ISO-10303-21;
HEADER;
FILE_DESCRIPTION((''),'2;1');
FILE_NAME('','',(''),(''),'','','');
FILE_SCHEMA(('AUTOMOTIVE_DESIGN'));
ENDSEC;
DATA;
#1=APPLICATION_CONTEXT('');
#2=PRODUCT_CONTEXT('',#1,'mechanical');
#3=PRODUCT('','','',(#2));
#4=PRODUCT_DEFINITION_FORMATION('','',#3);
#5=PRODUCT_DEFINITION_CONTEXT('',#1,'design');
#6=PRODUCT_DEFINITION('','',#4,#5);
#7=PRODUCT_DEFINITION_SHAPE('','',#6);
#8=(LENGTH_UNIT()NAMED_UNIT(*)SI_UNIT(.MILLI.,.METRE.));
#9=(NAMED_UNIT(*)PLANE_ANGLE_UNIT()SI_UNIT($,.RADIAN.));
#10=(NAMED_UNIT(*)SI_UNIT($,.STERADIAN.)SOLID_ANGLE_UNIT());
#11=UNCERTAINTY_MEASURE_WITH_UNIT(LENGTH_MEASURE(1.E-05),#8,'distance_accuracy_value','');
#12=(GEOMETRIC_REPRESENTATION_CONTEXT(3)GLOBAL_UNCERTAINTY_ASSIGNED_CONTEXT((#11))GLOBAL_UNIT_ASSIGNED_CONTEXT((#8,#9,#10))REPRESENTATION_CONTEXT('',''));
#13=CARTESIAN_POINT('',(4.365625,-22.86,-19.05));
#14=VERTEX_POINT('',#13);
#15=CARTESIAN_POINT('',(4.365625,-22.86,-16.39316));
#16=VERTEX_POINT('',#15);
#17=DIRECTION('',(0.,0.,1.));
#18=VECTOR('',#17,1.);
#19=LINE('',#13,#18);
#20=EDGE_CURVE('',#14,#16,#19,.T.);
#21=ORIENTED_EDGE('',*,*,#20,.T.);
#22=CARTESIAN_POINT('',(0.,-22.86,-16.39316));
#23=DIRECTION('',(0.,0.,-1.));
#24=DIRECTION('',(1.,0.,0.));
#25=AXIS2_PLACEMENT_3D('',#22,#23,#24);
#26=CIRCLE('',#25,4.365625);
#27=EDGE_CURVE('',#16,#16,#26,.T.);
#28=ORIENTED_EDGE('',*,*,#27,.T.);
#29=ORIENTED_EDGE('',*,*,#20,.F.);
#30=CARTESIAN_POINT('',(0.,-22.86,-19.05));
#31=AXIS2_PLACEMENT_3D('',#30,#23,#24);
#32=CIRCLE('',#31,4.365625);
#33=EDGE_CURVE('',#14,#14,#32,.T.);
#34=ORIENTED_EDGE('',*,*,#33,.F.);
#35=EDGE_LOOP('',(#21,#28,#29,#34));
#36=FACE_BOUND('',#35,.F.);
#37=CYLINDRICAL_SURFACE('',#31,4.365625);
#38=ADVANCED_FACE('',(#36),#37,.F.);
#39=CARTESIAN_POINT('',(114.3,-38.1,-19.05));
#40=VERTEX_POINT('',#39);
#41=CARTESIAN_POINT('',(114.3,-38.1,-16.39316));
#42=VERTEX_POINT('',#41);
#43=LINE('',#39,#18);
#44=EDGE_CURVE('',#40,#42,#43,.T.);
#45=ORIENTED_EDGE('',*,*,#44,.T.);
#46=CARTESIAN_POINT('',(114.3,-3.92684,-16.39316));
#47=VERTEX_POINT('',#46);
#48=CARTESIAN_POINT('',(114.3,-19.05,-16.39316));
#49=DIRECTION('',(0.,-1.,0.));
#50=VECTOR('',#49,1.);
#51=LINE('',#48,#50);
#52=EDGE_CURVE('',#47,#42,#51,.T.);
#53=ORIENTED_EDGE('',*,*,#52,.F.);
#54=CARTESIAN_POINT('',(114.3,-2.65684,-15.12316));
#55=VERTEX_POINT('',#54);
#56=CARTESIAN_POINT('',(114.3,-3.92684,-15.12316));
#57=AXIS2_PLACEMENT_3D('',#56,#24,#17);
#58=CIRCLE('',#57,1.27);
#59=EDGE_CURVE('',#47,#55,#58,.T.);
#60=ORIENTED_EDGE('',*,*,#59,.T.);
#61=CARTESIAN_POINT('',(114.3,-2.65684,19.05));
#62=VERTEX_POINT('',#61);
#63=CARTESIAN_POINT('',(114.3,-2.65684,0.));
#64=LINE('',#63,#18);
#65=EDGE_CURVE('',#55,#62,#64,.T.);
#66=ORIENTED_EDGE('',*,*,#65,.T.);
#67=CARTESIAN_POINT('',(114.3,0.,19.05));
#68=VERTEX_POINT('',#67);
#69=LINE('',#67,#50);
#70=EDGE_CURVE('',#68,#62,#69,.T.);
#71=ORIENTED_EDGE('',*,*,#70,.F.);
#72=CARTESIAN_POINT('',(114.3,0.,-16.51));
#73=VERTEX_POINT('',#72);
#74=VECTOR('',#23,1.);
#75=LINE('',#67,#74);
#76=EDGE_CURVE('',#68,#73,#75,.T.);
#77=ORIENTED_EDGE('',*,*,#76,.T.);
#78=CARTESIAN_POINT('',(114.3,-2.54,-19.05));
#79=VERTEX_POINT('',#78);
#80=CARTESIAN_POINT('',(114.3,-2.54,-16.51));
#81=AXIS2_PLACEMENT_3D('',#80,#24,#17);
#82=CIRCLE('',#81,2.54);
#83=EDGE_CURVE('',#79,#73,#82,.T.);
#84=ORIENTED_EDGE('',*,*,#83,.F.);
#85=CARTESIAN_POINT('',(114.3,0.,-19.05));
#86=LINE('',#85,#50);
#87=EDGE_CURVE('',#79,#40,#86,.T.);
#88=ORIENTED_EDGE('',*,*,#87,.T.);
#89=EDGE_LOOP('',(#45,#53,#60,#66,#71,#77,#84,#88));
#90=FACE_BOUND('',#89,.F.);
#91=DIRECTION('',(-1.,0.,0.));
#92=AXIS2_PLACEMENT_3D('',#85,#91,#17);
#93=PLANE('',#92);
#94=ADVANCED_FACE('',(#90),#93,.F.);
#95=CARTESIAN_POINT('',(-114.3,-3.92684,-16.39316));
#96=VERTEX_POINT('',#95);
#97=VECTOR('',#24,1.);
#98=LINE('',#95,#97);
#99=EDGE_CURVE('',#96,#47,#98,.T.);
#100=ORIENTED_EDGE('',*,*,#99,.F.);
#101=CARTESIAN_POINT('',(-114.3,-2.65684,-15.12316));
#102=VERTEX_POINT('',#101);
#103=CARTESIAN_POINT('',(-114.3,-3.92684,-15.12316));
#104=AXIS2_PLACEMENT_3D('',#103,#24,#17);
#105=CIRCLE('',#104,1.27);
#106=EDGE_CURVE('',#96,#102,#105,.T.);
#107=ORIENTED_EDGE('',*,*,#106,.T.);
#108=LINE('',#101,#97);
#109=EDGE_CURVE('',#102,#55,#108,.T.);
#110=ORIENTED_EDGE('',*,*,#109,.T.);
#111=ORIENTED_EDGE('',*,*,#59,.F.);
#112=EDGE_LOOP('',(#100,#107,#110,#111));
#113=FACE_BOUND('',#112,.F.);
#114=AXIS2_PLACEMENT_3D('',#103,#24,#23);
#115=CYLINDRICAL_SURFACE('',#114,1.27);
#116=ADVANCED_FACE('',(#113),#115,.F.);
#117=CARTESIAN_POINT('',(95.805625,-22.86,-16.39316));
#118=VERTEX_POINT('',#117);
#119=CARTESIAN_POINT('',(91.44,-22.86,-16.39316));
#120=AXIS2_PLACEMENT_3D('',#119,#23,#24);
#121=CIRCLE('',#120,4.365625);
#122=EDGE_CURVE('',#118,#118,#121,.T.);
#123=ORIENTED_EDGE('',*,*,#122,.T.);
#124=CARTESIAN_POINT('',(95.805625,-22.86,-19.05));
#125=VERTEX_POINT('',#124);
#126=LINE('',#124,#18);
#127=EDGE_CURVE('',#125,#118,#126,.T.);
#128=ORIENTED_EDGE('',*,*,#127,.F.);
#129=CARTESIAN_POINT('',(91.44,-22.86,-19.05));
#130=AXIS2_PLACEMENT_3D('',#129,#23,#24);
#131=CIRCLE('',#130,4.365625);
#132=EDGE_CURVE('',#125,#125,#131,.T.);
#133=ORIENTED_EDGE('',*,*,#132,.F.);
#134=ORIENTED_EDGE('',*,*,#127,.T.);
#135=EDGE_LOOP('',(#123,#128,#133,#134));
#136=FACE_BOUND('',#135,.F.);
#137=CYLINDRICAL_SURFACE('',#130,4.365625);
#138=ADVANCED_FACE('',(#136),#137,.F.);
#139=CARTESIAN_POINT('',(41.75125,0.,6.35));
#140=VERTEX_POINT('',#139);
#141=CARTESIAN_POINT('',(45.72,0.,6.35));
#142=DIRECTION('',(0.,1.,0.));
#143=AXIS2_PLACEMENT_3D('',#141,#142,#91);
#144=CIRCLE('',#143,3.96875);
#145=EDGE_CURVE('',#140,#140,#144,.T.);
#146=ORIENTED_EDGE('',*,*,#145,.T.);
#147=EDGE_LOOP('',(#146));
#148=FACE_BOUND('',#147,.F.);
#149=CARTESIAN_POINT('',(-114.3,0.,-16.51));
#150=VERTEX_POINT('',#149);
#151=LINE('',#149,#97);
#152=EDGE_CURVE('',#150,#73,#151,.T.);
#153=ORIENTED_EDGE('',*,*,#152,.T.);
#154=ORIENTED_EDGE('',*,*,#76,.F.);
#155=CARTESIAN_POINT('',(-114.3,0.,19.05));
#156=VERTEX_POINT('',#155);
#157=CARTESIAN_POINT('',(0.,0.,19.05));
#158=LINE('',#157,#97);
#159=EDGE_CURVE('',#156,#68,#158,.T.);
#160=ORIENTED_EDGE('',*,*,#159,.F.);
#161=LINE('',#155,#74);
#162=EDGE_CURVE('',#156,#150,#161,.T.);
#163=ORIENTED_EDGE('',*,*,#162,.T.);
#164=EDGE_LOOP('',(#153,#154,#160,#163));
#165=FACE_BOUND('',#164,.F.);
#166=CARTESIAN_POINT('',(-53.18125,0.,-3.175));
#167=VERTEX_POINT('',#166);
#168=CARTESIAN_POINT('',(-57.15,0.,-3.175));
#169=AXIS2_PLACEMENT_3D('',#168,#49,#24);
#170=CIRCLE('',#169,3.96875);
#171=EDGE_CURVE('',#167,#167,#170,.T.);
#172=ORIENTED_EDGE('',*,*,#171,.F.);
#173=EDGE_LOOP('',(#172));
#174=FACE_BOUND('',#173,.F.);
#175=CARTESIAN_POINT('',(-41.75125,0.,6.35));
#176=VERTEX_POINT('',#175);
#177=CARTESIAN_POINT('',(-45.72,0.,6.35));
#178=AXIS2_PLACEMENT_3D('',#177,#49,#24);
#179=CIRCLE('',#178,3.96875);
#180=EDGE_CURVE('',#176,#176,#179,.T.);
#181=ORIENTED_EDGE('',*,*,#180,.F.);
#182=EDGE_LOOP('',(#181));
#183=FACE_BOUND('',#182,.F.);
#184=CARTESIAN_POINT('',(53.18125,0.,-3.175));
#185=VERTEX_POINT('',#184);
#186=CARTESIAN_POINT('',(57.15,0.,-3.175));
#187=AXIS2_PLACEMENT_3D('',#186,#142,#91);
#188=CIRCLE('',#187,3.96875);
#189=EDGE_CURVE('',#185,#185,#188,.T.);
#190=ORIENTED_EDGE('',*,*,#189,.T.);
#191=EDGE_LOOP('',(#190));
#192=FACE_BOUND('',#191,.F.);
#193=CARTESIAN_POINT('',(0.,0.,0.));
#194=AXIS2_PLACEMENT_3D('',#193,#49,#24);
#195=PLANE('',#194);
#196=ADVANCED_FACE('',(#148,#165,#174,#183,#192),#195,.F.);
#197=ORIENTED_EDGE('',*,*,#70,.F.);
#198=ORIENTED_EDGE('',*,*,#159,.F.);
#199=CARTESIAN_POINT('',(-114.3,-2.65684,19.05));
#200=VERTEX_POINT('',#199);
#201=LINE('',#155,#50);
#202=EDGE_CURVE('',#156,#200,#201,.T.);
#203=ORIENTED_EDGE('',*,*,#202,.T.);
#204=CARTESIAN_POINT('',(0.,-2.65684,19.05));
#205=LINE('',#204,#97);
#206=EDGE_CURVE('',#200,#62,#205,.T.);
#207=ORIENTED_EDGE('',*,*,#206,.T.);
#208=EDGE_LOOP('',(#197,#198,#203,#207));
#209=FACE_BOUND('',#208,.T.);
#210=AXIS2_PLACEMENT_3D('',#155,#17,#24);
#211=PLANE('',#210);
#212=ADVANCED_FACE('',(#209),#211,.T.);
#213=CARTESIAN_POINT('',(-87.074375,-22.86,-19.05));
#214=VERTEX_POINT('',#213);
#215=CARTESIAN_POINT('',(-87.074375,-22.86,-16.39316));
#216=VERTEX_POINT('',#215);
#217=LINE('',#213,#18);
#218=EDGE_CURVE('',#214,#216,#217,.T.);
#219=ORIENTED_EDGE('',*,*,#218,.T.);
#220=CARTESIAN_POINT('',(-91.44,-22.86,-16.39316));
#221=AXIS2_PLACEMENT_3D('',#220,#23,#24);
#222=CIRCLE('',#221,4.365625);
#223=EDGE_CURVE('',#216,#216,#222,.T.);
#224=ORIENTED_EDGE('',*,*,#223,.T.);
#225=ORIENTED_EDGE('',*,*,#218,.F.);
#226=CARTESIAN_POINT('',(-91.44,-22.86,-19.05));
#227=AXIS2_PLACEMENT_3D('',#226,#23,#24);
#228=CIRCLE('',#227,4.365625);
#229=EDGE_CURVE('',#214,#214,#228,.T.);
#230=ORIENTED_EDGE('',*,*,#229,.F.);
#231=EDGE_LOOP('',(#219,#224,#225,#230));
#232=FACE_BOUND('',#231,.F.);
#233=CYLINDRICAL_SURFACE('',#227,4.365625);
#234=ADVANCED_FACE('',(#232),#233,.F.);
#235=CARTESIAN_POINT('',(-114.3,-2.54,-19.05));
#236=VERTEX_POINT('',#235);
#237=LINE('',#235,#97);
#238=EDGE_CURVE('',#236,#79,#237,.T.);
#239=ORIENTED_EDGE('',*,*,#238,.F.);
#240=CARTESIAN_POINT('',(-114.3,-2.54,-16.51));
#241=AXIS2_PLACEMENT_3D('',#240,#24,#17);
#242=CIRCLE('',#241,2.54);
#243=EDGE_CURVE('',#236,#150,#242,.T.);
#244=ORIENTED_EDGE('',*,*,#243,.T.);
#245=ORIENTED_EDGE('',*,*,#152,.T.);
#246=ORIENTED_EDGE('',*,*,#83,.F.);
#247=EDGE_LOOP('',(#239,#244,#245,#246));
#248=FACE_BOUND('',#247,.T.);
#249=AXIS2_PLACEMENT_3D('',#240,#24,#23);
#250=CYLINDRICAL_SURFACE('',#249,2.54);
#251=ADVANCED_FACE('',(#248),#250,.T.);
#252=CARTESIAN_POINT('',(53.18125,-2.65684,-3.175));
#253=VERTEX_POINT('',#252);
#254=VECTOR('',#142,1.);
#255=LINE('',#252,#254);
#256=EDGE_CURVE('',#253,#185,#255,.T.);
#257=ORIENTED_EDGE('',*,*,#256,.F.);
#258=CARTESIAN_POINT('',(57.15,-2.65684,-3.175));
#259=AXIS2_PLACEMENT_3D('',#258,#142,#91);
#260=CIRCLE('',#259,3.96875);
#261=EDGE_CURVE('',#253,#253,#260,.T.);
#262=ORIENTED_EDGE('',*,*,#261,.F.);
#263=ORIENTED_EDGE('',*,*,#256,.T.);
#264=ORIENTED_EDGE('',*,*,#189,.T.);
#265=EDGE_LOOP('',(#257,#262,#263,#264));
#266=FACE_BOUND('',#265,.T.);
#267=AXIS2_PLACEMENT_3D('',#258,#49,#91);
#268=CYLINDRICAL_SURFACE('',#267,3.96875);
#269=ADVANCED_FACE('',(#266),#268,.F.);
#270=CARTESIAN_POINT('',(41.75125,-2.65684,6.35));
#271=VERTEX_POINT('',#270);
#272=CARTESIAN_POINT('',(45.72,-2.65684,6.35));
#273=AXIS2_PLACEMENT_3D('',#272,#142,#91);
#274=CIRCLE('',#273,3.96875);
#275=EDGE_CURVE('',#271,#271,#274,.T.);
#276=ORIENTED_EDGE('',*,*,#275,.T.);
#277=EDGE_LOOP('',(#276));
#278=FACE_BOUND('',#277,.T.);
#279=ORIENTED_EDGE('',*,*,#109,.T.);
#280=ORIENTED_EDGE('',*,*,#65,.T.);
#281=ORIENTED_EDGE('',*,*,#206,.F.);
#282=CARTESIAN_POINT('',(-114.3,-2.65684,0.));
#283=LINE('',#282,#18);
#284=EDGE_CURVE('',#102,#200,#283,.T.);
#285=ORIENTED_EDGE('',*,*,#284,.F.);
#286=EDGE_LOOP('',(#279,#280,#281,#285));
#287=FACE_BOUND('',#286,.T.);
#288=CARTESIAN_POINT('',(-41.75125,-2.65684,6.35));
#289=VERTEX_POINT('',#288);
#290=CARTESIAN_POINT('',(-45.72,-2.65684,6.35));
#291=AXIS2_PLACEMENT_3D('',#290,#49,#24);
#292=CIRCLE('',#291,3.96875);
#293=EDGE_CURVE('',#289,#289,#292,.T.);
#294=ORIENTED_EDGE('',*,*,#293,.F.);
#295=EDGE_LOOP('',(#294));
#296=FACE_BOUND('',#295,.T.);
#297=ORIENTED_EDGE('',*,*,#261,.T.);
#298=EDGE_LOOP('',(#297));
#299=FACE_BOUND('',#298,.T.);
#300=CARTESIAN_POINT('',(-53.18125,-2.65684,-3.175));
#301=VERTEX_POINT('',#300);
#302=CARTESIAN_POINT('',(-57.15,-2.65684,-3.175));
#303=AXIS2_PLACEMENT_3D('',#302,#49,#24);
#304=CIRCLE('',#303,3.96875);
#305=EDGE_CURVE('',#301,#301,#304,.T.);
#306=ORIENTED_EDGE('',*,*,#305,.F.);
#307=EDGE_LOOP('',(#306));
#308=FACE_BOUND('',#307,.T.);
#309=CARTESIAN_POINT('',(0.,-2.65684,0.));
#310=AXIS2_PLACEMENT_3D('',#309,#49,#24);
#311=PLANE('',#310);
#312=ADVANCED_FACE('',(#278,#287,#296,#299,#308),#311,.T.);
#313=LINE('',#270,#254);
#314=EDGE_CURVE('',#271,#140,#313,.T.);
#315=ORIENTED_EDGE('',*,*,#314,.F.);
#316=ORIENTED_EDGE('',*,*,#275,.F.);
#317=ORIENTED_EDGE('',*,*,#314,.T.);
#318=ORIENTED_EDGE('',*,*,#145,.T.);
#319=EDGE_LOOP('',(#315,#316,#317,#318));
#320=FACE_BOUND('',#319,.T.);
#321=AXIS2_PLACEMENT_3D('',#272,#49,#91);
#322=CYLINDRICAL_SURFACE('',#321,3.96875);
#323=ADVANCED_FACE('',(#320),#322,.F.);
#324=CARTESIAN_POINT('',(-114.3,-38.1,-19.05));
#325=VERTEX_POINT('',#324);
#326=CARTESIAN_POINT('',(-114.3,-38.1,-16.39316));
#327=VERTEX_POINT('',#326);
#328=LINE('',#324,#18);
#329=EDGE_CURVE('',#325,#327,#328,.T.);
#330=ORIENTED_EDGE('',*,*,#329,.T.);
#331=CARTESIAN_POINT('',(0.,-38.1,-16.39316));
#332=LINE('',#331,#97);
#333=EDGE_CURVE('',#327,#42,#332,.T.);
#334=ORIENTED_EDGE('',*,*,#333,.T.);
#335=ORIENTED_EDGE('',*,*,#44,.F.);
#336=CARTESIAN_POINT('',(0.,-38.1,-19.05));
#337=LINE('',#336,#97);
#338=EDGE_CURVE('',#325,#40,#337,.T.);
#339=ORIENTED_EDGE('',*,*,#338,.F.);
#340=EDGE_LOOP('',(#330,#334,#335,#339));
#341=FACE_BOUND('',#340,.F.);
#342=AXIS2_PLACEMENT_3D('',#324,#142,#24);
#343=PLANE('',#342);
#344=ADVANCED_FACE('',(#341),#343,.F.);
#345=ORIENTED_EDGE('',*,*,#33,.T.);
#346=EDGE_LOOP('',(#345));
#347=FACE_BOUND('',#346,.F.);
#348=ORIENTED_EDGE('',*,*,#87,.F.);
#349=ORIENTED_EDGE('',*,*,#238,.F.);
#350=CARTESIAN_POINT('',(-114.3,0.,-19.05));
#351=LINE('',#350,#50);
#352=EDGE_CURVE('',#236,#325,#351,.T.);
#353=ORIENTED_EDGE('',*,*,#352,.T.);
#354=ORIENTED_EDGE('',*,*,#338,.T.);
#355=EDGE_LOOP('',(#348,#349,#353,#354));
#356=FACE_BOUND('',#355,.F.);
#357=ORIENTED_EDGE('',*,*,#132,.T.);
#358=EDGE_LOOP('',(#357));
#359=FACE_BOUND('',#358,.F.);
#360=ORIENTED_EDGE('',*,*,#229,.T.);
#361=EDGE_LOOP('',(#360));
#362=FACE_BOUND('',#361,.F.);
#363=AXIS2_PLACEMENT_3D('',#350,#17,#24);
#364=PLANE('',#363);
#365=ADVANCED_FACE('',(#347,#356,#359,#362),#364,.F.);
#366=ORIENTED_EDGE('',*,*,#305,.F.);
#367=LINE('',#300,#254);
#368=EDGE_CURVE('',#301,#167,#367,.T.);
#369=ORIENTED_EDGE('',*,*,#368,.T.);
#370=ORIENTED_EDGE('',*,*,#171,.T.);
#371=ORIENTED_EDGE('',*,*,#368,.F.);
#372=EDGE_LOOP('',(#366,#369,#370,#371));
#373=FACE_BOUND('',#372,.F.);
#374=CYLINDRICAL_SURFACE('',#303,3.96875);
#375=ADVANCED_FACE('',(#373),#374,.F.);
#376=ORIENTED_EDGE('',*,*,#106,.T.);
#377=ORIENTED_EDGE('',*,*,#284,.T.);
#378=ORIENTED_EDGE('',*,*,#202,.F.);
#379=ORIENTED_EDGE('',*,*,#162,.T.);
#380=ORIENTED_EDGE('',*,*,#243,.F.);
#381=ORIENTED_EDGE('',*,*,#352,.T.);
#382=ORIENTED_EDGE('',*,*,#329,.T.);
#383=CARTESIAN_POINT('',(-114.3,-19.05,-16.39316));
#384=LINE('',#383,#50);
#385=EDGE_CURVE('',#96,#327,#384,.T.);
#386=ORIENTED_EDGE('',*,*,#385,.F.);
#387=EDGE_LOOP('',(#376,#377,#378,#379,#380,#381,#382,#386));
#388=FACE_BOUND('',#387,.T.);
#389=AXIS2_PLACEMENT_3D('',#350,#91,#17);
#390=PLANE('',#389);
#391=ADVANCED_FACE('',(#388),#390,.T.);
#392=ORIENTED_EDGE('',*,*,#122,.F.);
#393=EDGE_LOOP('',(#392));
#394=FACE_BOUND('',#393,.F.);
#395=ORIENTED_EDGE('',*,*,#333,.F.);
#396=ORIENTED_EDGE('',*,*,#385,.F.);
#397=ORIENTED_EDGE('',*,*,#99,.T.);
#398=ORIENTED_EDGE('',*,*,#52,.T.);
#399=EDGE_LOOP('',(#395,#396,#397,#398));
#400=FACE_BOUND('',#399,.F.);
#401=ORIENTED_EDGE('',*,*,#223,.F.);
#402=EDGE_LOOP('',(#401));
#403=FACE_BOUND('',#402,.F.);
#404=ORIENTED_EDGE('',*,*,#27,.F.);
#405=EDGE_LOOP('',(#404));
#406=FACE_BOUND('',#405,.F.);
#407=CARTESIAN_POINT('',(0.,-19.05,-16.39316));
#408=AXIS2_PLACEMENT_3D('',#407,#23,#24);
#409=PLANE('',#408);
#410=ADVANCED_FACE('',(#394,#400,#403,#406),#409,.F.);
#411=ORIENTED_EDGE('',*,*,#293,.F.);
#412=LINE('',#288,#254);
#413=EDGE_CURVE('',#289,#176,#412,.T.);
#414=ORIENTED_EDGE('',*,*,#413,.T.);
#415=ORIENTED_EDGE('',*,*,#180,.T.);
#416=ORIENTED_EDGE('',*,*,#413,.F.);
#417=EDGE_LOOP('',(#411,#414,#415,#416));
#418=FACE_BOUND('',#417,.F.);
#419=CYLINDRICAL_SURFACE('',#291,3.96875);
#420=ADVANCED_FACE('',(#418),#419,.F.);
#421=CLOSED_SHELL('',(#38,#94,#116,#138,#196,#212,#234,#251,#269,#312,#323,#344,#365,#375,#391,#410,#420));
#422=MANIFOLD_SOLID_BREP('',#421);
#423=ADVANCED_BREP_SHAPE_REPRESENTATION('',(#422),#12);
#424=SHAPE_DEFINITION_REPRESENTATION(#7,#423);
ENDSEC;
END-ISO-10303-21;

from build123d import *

# Parameters (mm, degrees)
F0_W     = 228.6
F0_H     = 38.1
F1_DEPTH = 2.65684
F2_W     = 228.6
F2_H     = 38.1
F3_DEPTH = 2.65684
F4_R     = 3.96875
F5_DEPTH = 2.65684
F6_R     = 4.365625
F7_DEPTH = 2.65684
F8_R     = 2.54
F9_R     = 1.27


# Not quite as in the source:
# - a pattern or mirror of a feature is missing from the dataset's text; its kind, count and spacing are read off the source's solid


with BuildPart() as f1:
    # F0 (on Front) → F1 (new body)
    with BuildSketch(Plane.XZ):
        Rectangle(F0_W, F0_H)
    extrude(amount=F1_DEPTH)

    # F2 (on face) → F3 (join)
    with BuildSketch(Plane(origin=(0, 0, -19.05), x_dir=(1, 0, 0), z_dir=(0, 0, -1))):
        with Locations((0, 19.05)):
            Rectangle(F2_W, F2_H)
    extrude(amount=-F3_DEPTH)

    # F4 (on face) → F5 (cut)
    with BuildSketch(Plane.XZ.offset(2.65684)):
        with Locations((-45.72, 6.35)):
            Circle(F4_R)
        with Locations((-57.15, -3.175)):
            Circle(F4_R)
    f5 = extrude(amount=-F5_DEPTH, mode=Mode.SUBTRACT)

    # F5_copies: F5 across plane
    add(f5.mirror(Plane(origin=(0, 0, 0), x_dir=(0, 0, 1), z_dir=(1, 0, 0))), mode=Mode.SUBTRACT)

    # F6 (on face) → F7 (cut)
    with BuildSketch(Plane(origin=(0, 0, -19.05), x_dir=(1, 0, 0), z_dir=(0, 0, -1))):
        with Locations((-91.44, 22.86)):
            Circle(F6_R)
        with Locations((0, 22.86)):
            Circle(F6_R)
        with Locations((91.44, 22.86)):
            Circle(F6_R)
    extrude(amount=-F7_DEPTH, mode=Mode.SUBTRACT)

    # F8
    f8_edges = [f1.edges().sort_by_distance(p)[0] for p in [
        (0, 0, -19.05),
    ]]
    fillet(f8_edges, radius=F8_R)

    # F9
    f9_edges = [f1.edges().sort_by_distance(p)[0] for p in [
        (0, -2.65684, -16.39316),
    ]]
    fillet(f9_edges, radius=F9_R)


solid = f1.part
